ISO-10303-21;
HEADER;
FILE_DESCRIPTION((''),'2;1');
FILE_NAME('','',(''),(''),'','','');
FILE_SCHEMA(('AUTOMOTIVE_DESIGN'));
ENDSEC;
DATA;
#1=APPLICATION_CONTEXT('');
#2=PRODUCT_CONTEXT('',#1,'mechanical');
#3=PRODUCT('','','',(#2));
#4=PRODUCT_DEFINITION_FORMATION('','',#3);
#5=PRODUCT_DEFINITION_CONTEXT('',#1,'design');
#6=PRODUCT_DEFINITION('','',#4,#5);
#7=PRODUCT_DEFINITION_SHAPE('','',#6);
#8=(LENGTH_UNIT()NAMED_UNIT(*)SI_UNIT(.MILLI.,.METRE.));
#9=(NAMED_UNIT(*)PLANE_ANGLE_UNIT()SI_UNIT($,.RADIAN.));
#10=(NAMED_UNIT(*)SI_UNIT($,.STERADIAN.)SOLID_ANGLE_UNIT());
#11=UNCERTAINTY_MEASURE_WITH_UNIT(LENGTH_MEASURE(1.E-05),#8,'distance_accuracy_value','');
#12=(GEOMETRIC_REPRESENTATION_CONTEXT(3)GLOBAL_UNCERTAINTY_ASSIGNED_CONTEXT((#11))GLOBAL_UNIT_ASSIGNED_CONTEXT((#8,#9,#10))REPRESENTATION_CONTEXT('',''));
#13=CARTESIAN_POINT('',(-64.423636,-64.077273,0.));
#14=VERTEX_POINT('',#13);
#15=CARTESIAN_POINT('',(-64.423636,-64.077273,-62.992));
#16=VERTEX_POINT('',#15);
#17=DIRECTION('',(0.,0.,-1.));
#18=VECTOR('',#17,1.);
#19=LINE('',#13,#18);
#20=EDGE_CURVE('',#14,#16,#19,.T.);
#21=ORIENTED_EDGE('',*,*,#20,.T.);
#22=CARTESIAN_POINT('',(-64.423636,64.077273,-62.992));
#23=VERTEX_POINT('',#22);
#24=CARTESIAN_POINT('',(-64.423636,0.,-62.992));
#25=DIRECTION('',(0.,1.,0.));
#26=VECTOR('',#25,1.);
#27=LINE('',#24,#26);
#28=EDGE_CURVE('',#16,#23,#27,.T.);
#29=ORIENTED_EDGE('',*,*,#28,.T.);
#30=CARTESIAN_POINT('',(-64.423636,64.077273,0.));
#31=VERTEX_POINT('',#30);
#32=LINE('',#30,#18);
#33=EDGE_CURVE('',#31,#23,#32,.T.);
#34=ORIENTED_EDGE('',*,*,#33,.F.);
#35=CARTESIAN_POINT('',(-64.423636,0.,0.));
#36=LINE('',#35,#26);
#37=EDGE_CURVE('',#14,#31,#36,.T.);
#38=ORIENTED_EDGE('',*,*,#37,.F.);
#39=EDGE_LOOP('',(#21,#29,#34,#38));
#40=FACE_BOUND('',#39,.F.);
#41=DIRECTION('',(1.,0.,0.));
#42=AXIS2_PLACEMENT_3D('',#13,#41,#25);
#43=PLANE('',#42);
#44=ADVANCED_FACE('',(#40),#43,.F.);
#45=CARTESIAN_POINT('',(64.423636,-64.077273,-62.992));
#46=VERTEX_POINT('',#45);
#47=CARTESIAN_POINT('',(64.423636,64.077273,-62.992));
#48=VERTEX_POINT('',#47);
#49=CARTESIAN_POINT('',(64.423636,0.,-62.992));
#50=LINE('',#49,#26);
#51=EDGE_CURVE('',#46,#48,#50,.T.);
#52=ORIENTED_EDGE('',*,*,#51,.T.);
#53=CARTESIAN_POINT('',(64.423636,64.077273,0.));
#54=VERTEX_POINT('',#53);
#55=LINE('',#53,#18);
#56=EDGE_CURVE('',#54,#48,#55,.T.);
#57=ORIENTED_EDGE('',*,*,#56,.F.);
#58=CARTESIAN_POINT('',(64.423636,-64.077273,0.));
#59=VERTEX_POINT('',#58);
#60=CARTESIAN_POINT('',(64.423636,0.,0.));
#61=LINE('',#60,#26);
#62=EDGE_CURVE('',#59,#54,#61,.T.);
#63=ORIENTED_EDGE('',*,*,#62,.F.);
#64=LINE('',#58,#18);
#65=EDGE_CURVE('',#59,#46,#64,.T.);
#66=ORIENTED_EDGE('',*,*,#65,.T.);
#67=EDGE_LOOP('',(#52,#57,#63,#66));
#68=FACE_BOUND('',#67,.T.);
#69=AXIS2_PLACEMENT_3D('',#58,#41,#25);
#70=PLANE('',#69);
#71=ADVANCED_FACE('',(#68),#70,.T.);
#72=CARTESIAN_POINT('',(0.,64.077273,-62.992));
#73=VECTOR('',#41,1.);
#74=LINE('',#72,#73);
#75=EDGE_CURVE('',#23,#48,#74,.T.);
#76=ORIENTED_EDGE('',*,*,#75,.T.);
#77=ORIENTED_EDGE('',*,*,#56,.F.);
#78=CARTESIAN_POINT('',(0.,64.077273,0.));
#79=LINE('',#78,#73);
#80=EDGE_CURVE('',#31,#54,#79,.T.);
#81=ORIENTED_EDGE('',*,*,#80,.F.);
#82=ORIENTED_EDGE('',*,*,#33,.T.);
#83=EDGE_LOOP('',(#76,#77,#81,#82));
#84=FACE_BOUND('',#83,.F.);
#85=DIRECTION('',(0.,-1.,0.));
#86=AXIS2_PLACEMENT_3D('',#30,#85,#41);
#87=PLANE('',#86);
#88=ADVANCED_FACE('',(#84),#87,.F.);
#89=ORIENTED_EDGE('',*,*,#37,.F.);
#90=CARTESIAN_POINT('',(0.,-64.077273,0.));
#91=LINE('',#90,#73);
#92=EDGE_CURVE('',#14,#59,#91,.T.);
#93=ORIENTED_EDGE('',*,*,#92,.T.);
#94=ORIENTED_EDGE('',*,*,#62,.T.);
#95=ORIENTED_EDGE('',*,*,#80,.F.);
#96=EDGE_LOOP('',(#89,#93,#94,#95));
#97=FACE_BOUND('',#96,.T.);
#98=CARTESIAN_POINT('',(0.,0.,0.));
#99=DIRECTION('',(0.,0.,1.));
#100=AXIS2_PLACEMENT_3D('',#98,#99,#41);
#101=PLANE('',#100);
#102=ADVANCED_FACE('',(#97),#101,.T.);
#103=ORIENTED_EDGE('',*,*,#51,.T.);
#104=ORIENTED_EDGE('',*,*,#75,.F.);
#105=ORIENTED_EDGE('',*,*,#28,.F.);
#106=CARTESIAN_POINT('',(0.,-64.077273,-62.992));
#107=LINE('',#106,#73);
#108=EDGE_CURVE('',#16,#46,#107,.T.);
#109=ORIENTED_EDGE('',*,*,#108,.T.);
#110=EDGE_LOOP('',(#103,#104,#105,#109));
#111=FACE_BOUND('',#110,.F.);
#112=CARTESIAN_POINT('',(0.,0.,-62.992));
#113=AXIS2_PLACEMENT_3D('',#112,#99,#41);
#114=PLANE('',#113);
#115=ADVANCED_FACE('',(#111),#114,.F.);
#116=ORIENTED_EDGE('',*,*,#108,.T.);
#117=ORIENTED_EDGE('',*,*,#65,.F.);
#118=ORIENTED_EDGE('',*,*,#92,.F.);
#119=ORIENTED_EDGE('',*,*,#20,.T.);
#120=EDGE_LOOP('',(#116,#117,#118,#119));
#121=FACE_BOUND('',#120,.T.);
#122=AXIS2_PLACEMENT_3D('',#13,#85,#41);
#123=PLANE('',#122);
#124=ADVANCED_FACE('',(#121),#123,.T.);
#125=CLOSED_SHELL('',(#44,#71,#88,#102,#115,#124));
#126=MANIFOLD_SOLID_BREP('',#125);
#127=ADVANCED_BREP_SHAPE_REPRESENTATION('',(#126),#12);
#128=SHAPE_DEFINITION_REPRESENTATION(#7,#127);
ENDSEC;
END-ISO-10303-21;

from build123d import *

# Parameters (mm, degrees)
F0_W     = 128.847271204
F0_H     = 128.1545460224
F4_DEPTH = 62.992


# Not quite as in the source:
# - the program builds the solid bodies; features that only make, move or delete a surface that nothing else refers to are left out


with BuildPart() as f4:
    # F0 (on Top) → F4 (new body)
    with BuildSketch(Plane.XY):
        Rectangle(F0_W, F0_H)
    extrude(amount=-F4_DEPTH)


solid = f4.part
